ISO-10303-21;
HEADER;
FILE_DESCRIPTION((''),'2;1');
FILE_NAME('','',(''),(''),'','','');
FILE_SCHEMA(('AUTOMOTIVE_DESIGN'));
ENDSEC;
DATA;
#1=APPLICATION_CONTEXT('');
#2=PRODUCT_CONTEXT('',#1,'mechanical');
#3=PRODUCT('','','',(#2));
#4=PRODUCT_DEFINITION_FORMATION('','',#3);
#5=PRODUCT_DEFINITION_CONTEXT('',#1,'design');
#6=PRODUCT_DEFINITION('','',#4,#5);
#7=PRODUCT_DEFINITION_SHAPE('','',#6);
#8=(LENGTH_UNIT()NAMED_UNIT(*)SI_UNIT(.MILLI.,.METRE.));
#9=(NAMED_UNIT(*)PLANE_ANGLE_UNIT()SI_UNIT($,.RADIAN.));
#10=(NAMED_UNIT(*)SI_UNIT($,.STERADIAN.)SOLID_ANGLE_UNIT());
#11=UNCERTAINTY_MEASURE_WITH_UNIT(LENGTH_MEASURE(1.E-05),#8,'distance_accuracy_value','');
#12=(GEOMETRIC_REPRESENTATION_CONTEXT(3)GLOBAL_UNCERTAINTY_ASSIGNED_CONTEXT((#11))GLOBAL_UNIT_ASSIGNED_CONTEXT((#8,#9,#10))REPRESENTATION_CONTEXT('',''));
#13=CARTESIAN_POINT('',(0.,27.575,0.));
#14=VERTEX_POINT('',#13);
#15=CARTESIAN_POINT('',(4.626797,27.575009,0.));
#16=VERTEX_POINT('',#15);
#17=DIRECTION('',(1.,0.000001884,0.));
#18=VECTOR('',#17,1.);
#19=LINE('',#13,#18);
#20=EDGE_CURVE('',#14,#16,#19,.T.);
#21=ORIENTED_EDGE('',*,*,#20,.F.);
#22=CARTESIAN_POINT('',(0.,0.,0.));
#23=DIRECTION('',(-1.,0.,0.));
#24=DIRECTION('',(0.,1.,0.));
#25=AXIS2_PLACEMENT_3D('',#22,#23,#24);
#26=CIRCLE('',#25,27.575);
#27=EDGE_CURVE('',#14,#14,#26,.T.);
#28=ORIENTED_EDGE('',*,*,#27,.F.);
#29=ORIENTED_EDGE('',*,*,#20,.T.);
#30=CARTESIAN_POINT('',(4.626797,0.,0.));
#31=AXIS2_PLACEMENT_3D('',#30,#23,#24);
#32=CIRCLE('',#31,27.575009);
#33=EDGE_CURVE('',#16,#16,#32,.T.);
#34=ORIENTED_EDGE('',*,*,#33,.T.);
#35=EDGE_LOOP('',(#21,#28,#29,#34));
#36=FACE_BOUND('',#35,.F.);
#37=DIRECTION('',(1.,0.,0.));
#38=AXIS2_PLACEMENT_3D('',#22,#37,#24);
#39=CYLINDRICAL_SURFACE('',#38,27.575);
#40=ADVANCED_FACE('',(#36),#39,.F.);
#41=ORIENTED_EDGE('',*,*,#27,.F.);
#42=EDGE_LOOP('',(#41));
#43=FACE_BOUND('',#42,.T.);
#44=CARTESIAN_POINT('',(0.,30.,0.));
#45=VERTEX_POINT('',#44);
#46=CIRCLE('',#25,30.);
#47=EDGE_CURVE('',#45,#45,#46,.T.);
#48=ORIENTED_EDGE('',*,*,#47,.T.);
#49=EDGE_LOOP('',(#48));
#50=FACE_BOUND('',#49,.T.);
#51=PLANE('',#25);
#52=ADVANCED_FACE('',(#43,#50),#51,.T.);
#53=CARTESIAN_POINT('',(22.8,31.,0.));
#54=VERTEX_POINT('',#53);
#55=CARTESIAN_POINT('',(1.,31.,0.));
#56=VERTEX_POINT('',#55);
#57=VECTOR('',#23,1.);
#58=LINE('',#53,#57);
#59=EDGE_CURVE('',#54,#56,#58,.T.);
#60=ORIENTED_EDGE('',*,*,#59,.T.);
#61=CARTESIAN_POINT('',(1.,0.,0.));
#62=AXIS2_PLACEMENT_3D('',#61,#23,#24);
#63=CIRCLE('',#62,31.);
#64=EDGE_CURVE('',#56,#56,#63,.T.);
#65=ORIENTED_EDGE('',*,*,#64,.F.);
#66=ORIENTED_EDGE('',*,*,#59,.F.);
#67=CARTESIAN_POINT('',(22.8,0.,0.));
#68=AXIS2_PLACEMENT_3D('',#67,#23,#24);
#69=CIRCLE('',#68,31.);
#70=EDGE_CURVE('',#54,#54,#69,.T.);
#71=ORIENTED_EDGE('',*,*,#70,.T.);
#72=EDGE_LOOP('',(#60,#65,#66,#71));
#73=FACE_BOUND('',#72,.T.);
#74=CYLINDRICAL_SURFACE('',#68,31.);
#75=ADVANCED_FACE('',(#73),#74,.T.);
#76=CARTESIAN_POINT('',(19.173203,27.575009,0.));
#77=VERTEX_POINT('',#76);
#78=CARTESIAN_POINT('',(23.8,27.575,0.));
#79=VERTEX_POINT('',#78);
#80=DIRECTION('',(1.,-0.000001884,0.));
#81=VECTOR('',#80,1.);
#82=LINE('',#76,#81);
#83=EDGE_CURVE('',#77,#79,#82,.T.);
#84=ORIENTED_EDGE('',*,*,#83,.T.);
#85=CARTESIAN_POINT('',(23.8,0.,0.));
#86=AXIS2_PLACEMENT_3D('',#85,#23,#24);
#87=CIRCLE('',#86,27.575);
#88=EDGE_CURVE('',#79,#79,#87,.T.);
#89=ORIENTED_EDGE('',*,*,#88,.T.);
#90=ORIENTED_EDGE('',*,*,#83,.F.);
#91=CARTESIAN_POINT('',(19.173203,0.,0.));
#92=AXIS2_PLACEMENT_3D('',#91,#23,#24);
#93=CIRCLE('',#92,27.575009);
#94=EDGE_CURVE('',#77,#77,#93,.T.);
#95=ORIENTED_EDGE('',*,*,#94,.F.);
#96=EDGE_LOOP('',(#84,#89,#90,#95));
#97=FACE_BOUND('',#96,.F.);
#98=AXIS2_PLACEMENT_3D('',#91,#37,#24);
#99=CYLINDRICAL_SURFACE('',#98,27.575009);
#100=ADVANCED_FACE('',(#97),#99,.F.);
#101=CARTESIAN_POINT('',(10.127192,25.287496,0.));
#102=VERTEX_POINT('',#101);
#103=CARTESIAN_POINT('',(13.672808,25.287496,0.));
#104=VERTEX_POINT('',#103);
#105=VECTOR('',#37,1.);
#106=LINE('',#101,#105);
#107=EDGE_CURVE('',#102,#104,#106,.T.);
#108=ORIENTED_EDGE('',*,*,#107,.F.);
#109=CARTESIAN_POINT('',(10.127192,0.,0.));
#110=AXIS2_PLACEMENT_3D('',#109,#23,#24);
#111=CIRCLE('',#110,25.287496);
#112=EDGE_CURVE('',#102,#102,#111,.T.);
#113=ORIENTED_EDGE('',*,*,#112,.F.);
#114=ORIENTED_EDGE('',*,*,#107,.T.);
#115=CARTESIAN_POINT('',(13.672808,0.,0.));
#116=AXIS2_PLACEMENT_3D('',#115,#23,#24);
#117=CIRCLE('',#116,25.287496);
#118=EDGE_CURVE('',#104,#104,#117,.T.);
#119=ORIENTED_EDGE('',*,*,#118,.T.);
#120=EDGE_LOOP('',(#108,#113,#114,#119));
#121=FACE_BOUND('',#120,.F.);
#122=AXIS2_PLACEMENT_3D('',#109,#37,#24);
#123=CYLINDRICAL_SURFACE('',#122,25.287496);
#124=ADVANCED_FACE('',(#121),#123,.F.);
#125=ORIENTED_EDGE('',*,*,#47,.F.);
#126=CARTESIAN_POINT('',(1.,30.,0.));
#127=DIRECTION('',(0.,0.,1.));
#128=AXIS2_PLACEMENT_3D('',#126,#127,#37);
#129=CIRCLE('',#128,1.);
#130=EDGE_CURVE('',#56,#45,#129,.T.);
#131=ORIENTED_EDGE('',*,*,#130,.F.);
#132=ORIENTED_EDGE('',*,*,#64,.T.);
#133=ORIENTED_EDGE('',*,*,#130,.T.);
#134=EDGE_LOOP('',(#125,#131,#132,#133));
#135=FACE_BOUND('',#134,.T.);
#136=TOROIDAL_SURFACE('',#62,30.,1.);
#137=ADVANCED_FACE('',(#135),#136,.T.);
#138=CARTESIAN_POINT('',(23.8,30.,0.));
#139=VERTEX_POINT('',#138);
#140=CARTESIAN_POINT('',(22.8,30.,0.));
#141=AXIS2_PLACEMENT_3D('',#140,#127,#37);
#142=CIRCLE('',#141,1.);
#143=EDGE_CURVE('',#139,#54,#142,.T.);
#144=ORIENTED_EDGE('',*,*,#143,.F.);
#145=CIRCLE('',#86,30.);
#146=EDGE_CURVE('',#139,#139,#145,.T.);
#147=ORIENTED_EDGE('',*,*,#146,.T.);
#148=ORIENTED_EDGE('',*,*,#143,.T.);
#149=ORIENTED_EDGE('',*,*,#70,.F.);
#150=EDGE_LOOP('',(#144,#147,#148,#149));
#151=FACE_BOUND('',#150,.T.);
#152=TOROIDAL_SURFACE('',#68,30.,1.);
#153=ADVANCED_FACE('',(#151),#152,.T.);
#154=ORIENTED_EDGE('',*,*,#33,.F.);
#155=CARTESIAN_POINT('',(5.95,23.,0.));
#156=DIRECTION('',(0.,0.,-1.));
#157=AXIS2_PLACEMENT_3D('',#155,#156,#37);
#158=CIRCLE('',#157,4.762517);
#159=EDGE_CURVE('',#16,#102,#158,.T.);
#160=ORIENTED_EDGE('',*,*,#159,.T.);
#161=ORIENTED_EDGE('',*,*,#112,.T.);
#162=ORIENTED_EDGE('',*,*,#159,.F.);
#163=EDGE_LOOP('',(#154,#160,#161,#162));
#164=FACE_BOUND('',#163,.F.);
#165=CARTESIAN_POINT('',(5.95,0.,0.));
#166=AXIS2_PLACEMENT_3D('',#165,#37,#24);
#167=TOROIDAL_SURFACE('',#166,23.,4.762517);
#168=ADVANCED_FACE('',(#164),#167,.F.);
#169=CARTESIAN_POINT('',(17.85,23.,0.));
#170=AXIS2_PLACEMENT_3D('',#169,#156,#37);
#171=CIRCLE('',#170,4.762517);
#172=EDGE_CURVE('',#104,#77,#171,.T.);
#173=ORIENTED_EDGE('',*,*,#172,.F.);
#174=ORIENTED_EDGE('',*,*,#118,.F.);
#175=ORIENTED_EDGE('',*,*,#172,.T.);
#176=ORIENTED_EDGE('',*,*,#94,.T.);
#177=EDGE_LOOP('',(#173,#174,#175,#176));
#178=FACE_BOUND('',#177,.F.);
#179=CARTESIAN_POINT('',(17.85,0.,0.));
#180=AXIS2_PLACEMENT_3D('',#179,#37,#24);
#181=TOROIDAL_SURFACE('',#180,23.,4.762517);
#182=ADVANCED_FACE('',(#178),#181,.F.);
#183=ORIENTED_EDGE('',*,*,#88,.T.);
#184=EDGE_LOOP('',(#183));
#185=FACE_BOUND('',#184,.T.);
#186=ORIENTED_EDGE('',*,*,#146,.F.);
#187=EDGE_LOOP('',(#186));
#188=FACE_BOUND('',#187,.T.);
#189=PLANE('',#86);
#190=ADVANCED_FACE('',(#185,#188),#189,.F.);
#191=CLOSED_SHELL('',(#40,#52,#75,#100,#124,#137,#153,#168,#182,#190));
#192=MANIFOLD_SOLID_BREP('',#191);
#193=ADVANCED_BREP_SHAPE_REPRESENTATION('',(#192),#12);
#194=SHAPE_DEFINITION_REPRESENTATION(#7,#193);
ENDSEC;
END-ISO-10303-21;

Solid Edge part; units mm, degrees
sketch "Sketch1" plane through (0, 0, 0) normal (0, 0, 1) x (1, 0, 0)
  line L0 (0, 30) -> (0, 27.575)
  line L1 (0, 27.575) -> (4.6268, 27.575)
  arc A0 (4.6268, 27.575) -> (10.1272, 25.2875) centre (5.95, 23) cw
  line L2 (10.1272, 25.2875) -> (13.6728, 25.2875)
  arc A1 (13.6728, 25.2875) -> (19.1732, 27.575) centre (17.85, 23) cw
  line L3 (19.1732, 27.575) -> (23.8, 27.575)
  line L4 (23.8, 27.575) -> (23.8, 30)
  arc A2 (23.8, 30) -> (22.8, 31) centre (22.8, 30) ccw
  line L5 (22.8, 31) -> (1, 31)
  arc A3 (1, 31) -> (0, 30) centre (1, 30) ccw
revolve "RevolvedProtrusion1" add sketch "Sketch1" angle 360 about axis through (23.8, 0, 0) along (-1, 0, 0)
properties part number "3206 A-2RS1_PART2" material "Aluminio, 7075-T6"
